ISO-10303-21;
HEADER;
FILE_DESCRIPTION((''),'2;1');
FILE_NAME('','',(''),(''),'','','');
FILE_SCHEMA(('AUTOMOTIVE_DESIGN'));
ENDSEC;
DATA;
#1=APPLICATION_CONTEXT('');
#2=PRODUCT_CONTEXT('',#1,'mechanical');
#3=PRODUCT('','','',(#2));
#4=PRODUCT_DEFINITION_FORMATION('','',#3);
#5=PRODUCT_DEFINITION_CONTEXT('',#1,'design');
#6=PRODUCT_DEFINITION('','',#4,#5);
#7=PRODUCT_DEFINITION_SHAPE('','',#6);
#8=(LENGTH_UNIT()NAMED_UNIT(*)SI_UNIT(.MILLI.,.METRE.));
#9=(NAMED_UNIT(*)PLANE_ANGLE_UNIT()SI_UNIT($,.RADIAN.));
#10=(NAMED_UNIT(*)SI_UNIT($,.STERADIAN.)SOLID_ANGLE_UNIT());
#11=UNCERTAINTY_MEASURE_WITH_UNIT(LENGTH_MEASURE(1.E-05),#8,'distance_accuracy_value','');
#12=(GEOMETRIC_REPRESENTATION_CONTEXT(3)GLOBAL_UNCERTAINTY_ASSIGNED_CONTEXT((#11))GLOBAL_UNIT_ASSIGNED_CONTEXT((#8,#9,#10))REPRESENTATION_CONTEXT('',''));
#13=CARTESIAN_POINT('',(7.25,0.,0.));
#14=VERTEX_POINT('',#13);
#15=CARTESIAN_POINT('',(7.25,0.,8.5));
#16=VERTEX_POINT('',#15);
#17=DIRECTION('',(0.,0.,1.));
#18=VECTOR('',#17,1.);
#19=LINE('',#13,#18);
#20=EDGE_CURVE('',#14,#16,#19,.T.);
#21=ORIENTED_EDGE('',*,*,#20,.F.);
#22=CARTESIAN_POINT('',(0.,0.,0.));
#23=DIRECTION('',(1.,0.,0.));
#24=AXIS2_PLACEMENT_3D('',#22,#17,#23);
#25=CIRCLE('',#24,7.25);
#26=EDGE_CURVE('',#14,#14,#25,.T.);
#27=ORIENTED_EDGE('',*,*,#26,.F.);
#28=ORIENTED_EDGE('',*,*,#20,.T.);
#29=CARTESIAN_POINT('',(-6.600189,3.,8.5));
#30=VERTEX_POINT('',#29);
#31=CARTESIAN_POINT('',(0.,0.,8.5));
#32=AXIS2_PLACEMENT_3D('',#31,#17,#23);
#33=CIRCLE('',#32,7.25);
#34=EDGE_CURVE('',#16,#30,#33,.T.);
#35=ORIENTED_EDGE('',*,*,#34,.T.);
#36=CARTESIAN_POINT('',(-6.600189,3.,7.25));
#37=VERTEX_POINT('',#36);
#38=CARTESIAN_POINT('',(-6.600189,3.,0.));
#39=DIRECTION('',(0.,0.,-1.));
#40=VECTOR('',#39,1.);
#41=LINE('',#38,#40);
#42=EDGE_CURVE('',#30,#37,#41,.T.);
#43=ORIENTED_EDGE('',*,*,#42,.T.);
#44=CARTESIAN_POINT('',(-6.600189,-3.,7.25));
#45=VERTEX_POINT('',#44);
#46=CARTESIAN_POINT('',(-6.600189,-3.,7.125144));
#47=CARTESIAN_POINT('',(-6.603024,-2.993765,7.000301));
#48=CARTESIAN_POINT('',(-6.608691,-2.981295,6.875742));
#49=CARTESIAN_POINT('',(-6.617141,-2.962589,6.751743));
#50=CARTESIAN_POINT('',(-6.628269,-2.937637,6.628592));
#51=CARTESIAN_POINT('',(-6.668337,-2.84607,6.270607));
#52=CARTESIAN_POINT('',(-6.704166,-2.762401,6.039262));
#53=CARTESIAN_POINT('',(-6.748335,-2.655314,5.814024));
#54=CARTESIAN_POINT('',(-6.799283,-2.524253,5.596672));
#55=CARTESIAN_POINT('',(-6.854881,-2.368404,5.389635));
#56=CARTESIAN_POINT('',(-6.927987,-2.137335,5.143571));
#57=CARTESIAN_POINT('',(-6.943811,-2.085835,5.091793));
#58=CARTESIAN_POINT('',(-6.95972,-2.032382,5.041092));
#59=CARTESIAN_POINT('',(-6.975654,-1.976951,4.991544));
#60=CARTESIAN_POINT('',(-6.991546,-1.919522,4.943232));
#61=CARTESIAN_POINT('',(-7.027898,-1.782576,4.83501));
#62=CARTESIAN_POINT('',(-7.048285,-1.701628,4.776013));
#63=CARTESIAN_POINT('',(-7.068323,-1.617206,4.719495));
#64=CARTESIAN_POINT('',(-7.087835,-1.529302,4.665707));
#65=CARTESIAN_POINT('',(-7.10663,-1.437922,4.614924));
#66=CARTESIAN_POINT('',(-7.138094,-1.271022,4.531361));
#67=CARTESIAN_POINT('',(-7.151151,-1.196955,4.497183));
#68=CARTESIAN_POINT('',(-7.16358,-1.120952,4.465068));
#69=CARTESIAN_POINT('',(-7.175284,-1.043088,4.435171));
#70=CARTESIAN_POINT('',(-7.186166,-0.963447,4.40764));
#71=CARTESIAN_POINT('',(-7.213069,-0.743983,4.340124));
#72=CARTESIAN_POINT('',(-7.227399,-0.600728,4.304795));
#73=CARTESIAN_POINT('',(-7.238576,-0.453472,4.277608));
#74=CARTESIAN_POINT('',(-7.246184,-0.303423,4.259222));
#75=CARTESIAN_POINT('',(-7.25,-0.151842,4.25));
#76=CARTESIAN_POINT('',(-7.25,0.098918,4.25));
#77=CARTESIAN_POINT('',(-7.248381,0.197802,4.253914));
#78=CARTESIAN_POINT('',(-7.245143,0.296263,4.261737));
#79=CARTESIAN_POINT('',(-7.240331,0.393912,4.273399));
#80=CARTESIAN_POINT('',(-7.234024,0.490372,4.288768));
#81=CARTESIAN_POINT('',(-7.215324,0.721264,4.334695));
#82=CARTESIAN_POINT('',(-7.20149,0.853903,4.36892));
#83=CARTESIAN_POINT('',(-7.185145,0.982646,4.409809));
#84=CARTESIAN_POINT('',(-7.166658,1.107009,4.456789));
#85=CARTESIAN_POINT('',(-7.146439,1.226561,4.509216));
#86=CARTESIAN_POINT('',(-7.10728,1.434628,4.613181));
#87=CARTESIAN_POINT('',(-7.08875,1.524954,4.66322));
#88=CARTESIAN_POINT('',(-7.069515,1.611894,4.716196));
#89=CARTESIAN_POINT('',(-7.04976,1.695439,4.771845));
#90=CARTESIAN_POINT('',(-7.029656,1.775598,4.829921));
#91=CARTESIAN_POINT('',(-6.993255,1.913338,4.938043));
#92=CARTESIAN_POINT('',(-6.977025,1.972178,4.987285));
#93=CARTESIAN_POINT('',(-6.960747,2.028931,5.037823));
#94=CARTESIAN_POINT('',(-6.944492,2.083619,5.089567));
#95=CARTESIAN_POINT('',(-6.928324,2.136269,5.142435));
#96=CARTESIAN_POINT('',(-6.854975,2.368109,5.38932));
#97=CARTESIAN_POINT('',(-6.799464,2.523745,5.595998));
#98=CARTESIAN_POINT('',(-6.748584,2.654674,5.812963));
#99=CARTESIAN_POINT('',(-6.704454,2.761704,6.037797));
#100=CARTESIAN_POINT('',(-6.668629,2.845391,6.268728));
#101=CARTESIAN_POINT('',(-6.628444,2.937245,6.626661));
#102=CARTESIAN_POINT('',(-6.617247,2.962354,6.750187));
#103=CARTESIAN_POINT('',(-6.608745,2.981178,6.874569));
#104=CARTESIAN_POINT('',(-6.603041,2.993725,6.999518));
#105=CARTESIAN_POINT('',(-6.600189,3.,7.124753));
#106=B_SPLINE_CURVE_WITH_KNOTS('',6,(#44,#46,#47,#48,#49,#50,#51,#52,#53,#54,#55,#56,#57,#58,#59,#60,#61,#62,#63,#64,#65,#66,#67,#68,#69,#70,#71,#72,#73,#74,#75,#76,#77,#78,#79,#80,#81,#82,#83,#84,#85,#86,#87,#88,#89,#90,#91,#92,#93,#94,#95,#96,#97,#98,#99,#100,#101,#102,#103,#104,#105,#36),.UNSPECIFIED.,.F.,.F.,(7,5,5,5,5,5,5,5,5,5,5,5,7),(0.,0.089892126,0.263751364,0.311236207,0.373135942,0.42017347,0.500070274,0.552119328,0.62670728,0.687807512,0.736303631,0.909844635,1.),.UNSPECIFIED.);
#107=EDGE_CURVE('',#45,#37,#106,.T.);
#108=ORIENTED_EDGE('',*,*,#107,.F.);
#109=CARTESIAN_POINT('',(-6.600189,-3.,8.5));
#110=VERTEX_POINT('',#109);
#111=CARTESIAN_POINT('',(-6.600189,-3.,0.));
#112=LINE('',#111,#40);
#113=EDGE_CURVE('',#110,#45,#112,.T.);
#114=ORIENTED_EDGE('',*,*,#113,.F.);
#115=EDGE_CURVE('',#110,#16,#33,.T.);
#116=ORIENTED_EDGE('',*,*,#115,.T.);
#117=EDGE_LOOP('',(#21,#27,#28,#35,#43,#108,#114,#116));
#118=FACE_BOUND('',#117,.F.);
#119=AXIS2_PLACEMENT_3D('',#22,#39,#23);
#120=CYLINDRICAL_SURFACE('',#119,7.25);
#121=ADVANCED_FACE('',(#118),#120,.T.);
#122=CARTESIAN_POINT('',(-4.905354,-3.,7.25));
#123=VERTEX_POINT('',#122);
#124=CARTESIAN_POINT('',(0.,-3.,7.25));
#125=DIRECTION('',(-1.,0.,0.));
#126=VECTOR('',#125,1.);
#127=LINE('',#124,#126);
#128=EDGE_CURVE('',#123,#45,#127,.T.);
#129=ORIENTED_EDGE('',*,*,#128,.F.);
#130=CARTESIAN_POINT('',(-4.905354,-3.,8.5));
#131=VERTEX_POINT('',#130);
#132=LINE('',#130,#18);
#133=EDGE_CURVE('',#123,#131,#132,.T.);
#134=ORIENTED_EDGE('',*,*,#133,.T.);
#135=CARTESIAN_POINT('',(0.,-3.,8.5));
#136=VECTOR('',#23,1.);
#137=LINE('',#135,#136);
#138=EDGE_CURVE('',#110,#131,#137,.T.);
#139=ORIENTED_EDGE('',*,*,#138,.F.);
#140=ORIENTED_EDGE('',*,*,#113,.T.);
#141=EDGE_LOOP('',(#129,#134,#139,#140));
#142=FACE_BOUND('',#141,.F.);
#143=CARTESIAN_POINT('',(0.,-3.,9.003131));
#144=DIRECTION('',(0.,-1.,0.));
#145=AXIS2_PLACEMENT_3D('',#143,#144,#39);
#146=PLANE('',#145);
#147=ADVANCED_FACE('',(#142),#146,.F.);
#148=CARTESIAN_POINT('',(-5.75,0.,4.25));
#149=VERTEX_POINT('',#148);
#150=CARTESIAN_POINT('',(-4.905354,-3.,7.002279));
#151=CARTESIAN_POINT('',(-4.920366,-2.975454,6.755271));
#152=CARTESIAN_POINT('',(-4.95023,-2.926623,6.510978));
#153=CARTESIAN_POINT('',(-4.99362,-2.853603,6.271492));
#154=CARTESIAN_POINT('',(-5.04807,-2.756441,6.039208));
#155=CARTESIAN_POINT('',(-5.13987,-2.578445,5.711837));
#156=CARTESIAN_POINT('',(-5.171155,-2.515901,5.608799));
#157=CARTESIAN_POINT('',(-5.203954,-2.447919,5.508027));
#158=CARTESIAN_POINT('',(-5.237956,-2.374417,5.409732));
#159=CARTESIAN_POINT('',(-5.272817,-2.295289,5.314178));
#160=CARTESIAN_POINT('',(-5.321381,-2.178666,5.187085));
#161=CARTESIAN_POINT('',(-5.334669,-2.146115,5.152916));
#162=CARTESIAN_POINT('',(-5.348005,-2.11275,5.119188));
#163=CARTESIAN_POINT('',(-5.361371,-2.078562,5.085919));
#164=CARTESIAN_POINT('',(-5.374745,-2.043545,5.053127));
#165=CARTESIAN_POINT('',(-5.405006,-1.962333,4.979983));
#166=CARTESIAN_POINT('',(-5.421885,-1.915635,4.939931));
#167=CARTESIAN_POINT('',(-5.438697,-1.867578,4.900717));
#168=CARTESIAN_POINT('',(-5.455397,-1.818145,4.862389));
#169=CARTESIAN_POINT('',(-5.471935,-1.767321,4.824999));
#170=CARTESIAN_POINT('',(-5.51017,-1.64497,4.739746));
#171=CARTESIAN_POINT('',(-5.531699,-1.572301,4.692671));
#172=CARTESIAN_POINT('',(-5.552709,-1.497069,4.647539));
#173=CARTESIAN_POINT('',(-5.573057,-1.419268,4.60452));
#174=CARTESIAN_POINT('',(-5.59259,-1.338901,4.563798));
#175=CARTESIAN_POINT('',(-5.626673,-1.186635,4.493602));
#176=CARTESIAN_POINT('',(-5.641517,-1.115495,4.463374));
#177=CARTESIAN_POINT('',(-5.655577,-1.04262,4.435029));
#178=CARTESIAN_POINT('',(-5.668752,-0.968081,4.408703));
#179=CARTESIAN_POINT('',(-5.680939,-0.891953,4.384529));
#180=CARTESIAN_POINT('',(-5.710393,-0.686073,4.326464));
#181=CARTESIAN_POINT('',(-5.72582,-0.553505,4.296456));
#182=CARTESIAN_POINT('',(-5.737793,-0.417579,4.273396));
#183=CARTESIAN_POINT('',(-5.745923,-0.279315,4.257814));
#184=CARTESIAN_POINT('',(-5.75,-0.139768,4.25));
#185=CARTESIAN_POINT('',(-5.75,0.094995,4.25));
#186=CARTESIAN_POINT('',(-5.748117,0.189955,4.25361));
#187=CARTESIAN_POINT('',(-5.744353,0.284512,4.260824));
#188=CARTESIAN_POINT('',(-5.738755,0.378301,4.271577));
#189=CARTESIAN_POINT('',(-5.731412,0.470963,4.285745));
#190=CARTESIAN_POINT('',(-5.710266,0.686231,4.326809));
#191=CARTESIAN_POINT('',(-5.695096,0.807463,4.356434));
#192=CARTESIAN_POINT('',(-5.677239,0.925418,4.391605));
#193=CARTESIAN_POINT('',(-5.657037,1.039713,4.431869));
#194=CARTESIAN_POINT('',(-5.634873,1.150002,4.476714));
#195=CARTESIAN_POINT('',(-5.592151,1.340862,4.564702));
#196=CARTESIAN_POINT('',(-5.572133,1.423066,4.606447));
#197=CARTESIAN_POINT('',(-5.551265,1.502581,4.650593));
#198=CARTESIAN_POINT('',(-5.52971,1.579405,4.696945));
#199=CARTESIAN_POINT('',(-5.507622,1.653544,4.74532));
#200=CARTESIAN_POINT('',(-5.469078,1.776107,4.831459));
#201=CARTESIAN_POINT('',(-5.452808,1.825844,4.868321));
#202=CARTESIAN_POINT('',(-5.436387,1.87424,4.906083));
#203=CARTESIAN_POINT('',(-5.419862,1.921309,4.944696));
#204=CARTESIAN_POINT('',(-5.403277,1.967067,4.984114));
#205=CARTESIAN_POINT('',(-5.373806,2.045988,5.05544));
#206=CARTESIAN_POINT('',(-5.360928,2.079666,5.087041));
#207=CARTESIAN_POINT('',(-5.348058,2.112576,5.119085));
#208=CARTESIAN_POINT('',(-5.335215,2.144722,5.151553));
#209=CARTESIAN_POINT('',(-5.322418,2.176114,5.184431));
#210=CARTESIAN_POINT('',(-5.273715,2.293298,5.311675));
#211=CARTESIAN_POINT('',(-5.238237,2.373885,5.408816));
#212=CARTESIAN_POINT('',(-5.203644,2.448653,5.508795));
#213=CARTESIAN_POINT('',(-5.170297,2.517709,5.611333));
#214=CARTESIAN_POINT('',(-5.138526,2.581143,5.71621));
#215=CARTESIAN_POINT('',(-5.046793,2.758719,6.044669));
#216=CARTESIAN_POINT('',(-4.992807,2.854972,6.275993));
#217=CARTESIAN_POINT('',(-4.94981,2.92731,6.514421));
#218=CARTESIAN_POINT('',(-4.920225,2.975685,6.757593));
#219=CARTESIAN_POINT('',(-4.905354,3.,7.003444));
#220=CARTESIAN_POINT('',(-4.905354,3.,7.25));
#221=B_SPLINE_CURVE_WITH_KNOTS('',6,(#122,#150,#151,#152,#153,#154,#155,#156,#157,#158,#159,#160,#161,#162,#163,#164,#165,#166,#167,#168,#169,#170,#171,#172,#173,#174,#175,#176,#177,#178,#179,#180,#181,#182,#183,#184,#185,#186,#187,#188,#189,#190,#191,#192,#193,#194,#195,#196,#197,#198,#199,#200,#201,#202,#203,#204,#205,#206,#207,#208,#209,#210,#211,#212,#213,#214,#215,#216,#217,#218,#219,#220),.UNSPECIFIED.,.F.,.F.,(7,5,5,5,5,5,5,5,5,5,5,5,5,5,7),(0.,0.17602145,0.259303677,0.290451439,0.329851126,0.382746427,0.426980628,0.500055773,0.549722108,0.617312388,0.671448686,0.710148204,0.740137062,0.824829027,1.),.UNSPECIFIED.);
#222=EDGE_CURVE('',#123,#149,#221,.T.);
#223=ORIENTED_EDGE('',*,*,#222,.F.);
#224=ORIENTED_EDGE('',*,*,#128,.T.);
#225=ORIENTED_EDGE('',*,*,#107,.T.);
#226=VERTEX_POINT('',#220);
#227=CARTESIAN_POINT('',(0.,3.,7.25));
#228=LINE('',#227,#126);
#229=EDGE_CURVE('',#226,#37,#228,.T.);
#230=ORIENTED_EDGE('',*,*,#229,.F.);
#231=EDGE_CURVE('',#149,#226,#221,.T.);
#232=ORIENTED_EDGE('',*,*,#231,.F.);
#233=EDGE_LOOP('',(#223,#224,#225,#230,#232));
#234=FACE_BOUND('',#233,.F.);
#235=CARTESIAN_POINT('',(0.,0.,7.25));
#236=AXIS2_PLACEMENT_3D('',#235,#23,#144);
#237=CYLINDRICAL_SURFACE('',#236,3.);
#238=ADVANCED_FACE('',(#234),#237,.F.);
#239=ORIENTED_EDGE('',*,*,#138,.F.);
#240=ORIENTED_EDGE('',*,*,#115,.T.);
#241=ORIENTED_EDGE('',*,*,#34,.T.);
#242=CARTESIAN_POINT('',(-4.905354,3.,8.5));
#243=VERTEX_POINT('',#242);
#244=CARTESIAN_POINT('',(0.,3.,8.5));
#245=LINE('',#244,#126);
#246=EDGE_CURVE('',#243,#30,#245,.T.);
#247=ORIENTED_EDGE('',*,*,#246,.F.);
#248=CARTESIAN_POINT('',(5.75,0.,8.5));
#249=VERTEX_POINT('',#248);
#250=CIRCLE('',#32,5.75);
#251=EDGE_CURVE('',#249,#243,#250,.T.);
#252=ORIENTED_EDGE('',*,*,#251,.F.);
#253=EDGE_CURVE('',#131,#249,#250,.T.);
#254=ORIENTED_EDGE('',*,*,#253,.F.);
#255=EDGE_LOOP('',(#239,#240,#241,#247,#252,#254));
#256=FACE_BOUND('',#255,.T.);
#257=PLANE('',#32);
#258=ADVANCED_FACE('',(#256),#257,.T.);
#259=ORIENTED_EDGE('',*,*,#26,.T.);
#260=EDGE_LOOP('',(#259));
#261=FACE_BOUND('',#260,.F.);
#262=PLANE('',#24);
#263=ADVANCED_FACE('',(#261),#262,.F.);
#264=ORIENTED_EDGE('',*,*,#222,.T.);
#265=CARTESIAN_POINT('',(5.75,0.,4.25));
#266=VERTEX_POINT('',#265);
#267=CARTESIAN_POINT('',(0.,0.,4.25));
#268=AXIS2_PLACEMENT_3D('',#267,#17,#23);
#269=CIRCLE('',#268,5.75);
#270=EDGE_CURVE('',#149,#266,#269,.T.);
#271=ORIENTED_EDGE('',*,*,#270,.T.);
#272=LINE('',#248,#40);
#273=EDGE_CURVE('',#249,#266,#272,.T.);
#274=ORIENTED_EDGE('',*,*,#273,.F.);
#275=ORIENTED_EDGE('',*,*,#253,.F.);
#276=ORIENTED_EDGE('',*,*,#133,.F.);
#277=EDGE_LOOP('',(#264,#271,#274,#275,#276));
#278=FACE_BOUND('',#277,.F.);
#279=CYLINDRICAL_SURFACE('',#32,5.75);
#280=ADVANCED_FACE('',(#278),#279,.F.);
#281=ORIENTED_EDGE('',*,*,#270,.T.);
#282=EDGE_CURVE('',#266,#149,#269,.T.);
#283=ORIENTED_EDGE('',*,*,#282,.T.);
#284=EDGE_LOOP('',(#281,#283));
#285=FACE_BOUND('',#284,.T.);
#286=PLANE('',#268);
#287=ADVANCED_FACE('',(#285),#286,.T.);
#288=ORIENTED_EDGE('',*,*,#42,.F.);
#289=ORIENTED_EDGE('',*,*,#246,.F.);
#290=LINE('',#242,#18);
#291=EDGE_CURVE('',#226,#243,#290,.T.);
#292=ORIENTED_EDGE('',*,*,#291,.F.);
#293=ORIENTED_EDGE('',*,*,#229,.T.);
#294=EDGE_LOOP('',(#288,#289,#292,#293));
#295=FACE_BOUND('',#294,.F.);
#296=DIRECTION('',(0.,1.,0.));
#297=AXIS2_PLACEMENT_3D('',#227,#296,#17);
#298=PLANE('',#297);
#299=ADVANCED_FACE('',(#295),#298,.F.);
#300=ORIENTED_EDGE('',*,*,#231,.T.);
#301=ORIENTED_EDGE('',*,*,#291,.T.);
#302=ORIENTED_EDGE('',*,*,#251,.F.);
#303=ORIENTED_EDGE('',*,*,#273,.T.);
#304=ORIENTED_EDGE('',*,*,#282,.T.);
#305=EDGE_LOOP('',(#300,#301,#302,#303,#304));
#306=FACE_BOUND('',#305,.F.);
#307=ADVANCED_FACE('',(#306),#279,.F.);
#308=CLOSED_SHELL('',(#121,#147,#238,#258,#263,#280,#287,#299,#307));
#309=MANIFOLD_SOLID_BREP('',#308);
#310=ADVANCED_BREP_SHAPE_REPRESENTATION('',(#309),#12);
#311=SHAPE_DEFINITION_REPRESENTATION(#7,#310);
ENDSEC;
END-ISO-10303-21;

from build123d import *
from build123d import SkipClean  # not in build123d's __all__

# Parameters (mm, degrees)
F0_R     = 7.25
F1_DEPTH = 8.5
F2_R     = 5.75
F3_DEPTH = 4.25
F5_DEPTH = 25


with BuildPart() as f1:
    # F0 (on Top) → F1 (new body)
    with BuildSketch(Plane.XY):
        Circle(F0_R)
    extrude(amount=F1_DEPTH)

    # F2 (on face) → F3 (cut)
    with BuildSketch(Plane.XY.offset(8.5)):
        Circle(F2_R)
    extrude(amount=-F3_DEPTH, mode=Mode.SUBTRACT)

    # F4 (on Right) → F5 (cut)
    with BuildSketch(Plane.YZ):
        with BuildLine():
            Line((-3, 9.0031314455), (-3, 7.25))
            ThreePointArc((-3, 7.25), (0, 4.25), (3, 7.25))
            Line((3, 7.25), (3, 9.0439899638))
            Line((3, 9.0439899638), (-3, 9.0031314455))
        make_face()
    with SkipClean():  # cleaning this boolean's faces spoils the solid; the shape is the same uncleaned
        extrude(amount=-F5_DEPTH, mode=Mode.SUBTRACT)


solid = f1.part
